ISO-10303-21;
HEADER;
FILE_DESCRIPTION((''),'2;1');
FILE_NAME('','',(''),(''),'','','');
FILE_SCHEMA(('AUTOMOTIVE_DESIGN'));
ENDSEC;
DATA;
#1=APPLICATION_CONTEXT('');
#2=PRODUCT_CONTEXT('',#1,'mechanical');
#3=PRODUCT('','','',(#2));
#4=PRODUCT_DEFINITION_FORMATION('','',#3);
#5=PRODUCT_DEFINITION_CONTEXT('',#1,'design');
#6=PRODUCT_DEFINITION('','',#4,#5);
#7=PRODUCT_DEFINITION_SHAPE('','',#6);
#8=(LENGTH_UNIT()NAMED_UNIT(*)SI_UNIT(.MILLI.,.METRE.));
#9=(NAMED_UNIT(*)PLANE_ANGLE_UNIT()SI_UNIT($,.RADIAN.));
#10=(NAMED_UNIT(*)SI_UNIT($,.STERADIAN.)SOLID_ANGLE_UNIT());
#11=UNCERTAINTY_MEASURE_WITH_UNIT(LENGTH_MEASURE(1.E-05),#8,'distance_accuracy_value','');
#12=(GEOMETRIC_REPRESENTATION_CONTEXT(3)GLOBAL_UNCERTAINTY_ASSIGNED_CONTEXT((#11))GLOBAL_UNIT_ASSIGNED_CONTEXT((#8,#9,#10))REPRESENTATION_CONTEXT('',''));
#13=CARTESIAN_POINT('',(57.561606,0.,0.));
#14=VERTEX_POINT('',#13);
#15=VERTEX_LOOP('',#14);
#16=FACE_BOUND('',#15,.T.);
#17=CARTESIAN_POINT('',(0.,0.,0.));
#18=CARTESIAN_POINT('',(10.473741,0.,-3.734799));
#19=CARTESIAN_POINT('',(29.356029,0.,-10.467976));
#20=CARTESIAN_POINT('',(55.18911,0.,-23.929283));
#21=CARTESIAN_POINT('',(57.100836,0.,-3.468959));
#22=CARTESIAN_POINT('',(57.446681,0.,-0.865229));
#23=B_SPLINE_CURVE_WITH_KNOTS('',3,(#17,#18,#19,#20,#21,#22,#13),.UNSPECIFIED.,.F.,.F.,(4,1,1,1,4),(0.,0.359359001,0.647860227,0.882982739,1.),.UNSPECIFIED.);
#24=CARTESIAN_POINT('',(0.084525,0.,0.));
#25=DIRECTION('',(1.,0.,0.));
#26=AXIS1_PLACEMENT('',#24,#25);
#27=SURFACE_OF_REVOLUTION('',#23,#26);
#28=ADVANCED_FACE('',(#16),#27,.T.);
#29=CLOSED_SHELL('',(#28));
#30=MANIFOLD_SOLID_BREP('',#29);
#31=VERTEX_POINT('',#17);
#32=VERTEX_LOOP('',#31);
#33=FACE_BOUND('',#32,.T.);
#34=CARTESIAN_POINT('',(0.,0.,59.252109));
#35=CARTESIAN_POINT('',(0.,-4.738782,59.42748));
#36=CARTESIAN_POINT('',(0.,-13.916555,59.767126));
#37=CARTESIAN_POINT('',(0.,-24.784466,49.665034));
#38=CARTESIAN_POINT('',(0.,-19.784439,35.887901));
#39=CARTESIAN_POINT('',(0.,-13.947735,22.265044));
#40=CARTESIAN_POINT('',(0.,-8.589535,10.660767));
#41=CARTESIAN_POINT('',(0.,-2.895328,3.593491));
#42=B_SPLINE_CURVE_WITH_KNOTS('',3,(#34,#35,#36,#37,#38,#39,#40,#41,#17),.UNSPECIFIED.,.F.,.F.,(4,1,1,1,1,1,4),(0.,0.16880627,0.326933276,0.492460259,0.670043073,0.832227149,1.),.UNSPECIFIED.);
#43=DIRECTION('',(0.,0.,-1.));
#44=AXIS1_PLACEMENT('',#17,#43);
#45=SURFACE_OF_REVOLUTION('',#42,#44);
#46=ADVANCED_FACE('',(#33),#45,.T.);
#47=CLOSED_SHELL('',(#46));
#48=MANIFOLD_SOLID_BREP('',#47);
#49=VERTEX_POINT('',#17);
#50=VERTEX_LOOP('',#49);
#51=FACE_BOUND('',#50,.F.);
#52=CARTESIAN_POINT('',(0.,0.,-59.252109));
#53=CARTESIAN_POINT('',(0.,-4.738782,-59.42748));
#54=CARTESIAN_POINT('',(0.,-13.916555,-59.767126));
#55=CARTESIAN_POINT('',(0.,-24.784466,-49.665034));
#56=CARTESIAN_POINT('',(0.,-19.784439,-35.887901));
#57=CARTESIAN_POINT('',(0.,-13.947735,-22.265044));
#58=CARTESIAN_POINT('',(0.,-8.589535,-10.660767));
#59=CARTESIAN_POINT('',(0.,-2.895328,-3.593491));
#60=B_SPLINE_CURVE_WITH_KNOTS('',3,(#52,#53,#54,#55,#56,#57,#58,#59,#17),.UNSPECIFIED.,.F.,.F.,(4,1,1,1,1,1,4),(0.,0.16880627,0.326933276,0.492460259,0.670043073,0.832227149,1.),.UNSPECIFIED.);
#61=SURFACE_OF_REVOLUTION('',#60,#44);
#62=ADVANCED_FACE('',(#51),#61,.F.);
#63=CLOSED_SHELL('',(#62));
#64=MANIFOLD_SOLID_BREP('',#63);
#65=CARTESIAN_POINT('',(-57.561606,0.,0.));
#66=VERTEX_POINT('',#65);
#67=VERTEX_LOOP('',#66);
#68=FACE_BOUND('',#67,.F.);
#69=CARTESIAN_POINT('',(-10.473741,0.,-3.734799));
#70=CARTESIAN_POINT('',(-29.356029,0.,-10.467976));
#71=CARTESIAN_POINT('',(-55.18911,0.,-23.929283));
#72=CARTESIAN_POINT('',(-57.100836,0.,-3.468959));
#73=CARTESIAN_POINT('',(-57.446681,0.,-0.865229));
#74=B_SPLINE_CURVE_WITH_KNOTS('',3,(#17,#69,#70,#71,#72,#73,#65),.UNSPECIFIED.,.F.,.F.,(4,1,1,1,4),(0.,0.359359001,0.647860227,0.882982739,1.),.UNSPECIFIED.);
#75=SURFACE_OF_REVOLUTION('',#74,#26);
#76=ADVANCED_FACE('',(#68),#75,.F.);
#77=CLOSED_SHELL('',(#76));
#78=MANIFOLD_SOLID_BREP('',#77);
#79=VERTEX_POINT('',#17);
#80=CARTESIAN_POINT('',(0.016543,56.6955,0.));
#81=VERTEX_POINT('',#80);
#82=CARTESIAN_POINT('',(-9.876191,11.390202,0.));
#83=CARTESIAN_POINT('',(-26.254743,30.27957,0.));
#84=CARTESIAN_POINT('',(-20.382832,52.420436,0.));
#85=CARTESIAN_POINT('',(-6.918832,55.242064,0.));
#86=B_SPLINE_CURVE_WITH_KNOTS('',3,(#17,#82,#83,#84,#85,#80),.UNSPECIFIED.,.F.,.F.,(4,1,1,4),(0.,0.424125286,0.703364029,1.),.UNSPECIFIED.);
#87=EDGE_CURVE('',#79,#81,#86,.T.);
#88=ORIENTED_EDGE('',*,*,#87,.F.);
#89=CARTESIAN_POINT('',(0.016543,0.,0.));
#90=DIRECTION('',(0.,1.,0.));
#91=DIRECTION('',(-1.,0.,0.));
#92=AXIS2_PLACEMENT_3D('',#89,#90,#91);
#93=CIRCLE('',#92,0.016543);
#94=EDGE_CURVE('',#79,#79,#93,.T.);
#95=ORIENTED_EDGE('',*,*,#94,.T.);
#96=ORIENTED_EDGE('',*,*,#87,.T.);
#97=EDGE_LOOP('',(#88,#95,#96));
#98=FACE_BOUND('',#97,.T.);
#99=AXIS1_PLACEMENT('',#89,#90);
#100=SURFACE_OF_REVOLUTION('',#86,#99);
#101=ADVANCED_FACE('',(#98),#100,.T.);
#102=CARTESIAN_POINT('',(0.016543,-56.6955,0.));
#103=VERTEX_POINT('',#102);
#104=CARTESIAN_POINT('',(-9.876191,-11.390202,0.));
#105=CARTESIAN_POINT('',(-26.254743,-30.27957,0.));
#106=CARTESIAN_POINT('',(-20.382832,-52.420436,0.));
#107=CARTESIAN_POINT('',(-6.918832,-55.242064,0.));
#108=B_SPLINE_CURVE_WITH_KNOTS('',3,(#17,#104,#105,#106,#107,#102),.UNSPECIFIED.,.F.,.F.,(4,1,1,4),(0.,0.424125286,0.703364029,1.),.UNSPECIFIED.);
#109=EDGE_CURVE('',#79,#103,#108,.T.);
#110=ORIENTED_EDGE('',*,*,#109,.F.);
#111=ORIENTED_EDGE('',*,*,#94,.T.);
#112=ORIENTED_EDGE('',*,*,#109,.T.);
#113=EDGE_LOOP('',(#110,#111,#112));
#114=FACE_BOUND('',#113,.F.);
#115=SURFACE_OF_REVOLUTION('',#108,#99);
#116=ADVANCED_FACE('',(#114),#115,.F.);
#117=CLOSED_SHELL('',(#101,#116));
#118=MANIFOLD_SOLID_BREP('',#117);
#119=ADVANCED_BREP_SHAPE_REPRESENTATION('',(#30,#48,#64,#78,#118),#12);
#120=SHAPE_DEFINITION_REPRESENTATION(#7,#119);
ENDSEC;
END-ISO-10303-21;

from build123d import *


# Not quite as in the source:
# - a feature names something its author has since deleted; it is built from what else it names


with BuildPart() as f1:
    # F0 (on Right) → F1 (revolve)
    with BuildSketch(Plane.YZ):
        with BuildLine():
            Line((0, 0), (0, 59.2521093786))
            add(Edge.make_bspline(
                [(0, 59.2521093786), (-4.7387822155, 59.4274798173), (-13.9165550358, 59.7671261596), (-24.7844658436, 49.6650341304), (-19.7844391022, 35.8879005927), (-13.9477352777, 22.2650438348), (-8.5895348934, 10.6607669), (-2.8953275907, 3.5934905588), (0, 0)],
                knots=[0, 0, 0, 0, 0.1688062696, 0.3269332759, 0.4924602589, 0.6700430734, 0.832227149, 1, 1, 1, 1], degree=3))
        make_face()
    revolve(axis=Axis((0, 0, 0), (0, 0, -1)))



with BuildPart() as f1b:
    # F0 (on Right) → F1, piece 2 (revolve)
    with BuildSketch(Plane.YZ):
        with BuildLine():
            Line((0, -59.2521093786), (0, 0))
            add(Edge.make_bspline(
                [(0, -59.2521093786), (-4.7387822155, -59.4274798173), (-13.9165550358, -59.7671261596), (-24.7844658436, -49.6650341304), (-19.7844391022, -35.8879005927), (-13.9477352777, -22.2650438348), (-8.5895348934, -10.6607669), (-2.8953275907, -3.5934905588), (0, 0)],
                knots=[0, 0, 0, 0, 0.1688062696, 0.3269332759, 0.4924602589, 0.6700430734, 0.832227149, 1, 1, 1, 1], degree=3))
        make_face()
    revolve(axis=Axis((0, 0, 0), (0, 0, -1)))


with BuildPart() as f1_1:
    add(f1.part)

    add(f1b.part)  # F3 merges F1b
    # F2 (on Front) → F3 (revolve)
    with BuildSketch(Plane.XZ):
        with BuildLine():
            Line((0, 0), (-57.5616061687, 0))
            add(Edge.make_bspline(
                [(0, 0), (-10.4737408609, -3.7347990618), (-29.3560288191, -10.4679760888), (-55.1891100393, -23.9292829099), (-57.1008358167, -3.4689589587), (-57.4466807158, -0.8652285848), (-57.5616061687, 0)],
                knots=[0, 0, 0, 0, 0.3593590005, 0.6478602266, 0.8829827386, 1, 1, 1, 1], degree=3))
        make_face()
        with BuildLine():
            Line((57.5616061687, 0), (0, 0))
            add(Edge.make_bspline(
                [(0, 0), (10.4737408609, -3.7347990618), (29.3560288191, -10.4679760888), (55.1891100393, -23.9292829099), (57.1008358167, -3.4689589587), (57.4466807158, -0.8652285848), (57.5616061687, 0)],
                knots=[0, 0, 0, 0, 0.3593590005, 0.6478602266, 0.8829827386, 1, 1, 1, 1], degree=3))
        make_face()
    revolve(axis=Axis((0.0845249742, 0, 0), (1, 0, 0)))


with BuildPart() as f5:
    # F4 (on Top) → F5 (revolve)
    with BuildSketch(Plane.XY):
        with BuildLine():
            add(Edge.make_bspline(
                [(0, 0), (-9.8761914078, -11.3902021624), (-26.2547427816, -30.2795698926), (-20.3828318801, -52.4204355109), (-6.9188317465, -55.2420643448), (0.0165426494, -56.6954995925)],
                knots=[0, 0, 0, 0, 0.4241252859, 0.7033640294, 1, 1, 1, 1], degree=3))
            Line((0.0165426494, -56.6954995925), (0.0165426494, 56.6954995925))
            add(Edge.make_bspline(
                [(0, 0), (-9.8761914078, 11.3902021624), (-26.2547427816, 30.2795698926), (-20.3828318801, 52.4204355109), (-6.9188317465, 55.2420643448), (0.0165426494, 56.6954995925)],
                knots=[0, 0, 0, 0, 0.4241252859, 0.7033640294, 1, 1, 1, 1], degree=3))
        make_face()
    revolve(axis=Axis((0.0165426494, 0, 0), (0, 1, 0)))


solid = Compound([f1_1.part, f5.part])
